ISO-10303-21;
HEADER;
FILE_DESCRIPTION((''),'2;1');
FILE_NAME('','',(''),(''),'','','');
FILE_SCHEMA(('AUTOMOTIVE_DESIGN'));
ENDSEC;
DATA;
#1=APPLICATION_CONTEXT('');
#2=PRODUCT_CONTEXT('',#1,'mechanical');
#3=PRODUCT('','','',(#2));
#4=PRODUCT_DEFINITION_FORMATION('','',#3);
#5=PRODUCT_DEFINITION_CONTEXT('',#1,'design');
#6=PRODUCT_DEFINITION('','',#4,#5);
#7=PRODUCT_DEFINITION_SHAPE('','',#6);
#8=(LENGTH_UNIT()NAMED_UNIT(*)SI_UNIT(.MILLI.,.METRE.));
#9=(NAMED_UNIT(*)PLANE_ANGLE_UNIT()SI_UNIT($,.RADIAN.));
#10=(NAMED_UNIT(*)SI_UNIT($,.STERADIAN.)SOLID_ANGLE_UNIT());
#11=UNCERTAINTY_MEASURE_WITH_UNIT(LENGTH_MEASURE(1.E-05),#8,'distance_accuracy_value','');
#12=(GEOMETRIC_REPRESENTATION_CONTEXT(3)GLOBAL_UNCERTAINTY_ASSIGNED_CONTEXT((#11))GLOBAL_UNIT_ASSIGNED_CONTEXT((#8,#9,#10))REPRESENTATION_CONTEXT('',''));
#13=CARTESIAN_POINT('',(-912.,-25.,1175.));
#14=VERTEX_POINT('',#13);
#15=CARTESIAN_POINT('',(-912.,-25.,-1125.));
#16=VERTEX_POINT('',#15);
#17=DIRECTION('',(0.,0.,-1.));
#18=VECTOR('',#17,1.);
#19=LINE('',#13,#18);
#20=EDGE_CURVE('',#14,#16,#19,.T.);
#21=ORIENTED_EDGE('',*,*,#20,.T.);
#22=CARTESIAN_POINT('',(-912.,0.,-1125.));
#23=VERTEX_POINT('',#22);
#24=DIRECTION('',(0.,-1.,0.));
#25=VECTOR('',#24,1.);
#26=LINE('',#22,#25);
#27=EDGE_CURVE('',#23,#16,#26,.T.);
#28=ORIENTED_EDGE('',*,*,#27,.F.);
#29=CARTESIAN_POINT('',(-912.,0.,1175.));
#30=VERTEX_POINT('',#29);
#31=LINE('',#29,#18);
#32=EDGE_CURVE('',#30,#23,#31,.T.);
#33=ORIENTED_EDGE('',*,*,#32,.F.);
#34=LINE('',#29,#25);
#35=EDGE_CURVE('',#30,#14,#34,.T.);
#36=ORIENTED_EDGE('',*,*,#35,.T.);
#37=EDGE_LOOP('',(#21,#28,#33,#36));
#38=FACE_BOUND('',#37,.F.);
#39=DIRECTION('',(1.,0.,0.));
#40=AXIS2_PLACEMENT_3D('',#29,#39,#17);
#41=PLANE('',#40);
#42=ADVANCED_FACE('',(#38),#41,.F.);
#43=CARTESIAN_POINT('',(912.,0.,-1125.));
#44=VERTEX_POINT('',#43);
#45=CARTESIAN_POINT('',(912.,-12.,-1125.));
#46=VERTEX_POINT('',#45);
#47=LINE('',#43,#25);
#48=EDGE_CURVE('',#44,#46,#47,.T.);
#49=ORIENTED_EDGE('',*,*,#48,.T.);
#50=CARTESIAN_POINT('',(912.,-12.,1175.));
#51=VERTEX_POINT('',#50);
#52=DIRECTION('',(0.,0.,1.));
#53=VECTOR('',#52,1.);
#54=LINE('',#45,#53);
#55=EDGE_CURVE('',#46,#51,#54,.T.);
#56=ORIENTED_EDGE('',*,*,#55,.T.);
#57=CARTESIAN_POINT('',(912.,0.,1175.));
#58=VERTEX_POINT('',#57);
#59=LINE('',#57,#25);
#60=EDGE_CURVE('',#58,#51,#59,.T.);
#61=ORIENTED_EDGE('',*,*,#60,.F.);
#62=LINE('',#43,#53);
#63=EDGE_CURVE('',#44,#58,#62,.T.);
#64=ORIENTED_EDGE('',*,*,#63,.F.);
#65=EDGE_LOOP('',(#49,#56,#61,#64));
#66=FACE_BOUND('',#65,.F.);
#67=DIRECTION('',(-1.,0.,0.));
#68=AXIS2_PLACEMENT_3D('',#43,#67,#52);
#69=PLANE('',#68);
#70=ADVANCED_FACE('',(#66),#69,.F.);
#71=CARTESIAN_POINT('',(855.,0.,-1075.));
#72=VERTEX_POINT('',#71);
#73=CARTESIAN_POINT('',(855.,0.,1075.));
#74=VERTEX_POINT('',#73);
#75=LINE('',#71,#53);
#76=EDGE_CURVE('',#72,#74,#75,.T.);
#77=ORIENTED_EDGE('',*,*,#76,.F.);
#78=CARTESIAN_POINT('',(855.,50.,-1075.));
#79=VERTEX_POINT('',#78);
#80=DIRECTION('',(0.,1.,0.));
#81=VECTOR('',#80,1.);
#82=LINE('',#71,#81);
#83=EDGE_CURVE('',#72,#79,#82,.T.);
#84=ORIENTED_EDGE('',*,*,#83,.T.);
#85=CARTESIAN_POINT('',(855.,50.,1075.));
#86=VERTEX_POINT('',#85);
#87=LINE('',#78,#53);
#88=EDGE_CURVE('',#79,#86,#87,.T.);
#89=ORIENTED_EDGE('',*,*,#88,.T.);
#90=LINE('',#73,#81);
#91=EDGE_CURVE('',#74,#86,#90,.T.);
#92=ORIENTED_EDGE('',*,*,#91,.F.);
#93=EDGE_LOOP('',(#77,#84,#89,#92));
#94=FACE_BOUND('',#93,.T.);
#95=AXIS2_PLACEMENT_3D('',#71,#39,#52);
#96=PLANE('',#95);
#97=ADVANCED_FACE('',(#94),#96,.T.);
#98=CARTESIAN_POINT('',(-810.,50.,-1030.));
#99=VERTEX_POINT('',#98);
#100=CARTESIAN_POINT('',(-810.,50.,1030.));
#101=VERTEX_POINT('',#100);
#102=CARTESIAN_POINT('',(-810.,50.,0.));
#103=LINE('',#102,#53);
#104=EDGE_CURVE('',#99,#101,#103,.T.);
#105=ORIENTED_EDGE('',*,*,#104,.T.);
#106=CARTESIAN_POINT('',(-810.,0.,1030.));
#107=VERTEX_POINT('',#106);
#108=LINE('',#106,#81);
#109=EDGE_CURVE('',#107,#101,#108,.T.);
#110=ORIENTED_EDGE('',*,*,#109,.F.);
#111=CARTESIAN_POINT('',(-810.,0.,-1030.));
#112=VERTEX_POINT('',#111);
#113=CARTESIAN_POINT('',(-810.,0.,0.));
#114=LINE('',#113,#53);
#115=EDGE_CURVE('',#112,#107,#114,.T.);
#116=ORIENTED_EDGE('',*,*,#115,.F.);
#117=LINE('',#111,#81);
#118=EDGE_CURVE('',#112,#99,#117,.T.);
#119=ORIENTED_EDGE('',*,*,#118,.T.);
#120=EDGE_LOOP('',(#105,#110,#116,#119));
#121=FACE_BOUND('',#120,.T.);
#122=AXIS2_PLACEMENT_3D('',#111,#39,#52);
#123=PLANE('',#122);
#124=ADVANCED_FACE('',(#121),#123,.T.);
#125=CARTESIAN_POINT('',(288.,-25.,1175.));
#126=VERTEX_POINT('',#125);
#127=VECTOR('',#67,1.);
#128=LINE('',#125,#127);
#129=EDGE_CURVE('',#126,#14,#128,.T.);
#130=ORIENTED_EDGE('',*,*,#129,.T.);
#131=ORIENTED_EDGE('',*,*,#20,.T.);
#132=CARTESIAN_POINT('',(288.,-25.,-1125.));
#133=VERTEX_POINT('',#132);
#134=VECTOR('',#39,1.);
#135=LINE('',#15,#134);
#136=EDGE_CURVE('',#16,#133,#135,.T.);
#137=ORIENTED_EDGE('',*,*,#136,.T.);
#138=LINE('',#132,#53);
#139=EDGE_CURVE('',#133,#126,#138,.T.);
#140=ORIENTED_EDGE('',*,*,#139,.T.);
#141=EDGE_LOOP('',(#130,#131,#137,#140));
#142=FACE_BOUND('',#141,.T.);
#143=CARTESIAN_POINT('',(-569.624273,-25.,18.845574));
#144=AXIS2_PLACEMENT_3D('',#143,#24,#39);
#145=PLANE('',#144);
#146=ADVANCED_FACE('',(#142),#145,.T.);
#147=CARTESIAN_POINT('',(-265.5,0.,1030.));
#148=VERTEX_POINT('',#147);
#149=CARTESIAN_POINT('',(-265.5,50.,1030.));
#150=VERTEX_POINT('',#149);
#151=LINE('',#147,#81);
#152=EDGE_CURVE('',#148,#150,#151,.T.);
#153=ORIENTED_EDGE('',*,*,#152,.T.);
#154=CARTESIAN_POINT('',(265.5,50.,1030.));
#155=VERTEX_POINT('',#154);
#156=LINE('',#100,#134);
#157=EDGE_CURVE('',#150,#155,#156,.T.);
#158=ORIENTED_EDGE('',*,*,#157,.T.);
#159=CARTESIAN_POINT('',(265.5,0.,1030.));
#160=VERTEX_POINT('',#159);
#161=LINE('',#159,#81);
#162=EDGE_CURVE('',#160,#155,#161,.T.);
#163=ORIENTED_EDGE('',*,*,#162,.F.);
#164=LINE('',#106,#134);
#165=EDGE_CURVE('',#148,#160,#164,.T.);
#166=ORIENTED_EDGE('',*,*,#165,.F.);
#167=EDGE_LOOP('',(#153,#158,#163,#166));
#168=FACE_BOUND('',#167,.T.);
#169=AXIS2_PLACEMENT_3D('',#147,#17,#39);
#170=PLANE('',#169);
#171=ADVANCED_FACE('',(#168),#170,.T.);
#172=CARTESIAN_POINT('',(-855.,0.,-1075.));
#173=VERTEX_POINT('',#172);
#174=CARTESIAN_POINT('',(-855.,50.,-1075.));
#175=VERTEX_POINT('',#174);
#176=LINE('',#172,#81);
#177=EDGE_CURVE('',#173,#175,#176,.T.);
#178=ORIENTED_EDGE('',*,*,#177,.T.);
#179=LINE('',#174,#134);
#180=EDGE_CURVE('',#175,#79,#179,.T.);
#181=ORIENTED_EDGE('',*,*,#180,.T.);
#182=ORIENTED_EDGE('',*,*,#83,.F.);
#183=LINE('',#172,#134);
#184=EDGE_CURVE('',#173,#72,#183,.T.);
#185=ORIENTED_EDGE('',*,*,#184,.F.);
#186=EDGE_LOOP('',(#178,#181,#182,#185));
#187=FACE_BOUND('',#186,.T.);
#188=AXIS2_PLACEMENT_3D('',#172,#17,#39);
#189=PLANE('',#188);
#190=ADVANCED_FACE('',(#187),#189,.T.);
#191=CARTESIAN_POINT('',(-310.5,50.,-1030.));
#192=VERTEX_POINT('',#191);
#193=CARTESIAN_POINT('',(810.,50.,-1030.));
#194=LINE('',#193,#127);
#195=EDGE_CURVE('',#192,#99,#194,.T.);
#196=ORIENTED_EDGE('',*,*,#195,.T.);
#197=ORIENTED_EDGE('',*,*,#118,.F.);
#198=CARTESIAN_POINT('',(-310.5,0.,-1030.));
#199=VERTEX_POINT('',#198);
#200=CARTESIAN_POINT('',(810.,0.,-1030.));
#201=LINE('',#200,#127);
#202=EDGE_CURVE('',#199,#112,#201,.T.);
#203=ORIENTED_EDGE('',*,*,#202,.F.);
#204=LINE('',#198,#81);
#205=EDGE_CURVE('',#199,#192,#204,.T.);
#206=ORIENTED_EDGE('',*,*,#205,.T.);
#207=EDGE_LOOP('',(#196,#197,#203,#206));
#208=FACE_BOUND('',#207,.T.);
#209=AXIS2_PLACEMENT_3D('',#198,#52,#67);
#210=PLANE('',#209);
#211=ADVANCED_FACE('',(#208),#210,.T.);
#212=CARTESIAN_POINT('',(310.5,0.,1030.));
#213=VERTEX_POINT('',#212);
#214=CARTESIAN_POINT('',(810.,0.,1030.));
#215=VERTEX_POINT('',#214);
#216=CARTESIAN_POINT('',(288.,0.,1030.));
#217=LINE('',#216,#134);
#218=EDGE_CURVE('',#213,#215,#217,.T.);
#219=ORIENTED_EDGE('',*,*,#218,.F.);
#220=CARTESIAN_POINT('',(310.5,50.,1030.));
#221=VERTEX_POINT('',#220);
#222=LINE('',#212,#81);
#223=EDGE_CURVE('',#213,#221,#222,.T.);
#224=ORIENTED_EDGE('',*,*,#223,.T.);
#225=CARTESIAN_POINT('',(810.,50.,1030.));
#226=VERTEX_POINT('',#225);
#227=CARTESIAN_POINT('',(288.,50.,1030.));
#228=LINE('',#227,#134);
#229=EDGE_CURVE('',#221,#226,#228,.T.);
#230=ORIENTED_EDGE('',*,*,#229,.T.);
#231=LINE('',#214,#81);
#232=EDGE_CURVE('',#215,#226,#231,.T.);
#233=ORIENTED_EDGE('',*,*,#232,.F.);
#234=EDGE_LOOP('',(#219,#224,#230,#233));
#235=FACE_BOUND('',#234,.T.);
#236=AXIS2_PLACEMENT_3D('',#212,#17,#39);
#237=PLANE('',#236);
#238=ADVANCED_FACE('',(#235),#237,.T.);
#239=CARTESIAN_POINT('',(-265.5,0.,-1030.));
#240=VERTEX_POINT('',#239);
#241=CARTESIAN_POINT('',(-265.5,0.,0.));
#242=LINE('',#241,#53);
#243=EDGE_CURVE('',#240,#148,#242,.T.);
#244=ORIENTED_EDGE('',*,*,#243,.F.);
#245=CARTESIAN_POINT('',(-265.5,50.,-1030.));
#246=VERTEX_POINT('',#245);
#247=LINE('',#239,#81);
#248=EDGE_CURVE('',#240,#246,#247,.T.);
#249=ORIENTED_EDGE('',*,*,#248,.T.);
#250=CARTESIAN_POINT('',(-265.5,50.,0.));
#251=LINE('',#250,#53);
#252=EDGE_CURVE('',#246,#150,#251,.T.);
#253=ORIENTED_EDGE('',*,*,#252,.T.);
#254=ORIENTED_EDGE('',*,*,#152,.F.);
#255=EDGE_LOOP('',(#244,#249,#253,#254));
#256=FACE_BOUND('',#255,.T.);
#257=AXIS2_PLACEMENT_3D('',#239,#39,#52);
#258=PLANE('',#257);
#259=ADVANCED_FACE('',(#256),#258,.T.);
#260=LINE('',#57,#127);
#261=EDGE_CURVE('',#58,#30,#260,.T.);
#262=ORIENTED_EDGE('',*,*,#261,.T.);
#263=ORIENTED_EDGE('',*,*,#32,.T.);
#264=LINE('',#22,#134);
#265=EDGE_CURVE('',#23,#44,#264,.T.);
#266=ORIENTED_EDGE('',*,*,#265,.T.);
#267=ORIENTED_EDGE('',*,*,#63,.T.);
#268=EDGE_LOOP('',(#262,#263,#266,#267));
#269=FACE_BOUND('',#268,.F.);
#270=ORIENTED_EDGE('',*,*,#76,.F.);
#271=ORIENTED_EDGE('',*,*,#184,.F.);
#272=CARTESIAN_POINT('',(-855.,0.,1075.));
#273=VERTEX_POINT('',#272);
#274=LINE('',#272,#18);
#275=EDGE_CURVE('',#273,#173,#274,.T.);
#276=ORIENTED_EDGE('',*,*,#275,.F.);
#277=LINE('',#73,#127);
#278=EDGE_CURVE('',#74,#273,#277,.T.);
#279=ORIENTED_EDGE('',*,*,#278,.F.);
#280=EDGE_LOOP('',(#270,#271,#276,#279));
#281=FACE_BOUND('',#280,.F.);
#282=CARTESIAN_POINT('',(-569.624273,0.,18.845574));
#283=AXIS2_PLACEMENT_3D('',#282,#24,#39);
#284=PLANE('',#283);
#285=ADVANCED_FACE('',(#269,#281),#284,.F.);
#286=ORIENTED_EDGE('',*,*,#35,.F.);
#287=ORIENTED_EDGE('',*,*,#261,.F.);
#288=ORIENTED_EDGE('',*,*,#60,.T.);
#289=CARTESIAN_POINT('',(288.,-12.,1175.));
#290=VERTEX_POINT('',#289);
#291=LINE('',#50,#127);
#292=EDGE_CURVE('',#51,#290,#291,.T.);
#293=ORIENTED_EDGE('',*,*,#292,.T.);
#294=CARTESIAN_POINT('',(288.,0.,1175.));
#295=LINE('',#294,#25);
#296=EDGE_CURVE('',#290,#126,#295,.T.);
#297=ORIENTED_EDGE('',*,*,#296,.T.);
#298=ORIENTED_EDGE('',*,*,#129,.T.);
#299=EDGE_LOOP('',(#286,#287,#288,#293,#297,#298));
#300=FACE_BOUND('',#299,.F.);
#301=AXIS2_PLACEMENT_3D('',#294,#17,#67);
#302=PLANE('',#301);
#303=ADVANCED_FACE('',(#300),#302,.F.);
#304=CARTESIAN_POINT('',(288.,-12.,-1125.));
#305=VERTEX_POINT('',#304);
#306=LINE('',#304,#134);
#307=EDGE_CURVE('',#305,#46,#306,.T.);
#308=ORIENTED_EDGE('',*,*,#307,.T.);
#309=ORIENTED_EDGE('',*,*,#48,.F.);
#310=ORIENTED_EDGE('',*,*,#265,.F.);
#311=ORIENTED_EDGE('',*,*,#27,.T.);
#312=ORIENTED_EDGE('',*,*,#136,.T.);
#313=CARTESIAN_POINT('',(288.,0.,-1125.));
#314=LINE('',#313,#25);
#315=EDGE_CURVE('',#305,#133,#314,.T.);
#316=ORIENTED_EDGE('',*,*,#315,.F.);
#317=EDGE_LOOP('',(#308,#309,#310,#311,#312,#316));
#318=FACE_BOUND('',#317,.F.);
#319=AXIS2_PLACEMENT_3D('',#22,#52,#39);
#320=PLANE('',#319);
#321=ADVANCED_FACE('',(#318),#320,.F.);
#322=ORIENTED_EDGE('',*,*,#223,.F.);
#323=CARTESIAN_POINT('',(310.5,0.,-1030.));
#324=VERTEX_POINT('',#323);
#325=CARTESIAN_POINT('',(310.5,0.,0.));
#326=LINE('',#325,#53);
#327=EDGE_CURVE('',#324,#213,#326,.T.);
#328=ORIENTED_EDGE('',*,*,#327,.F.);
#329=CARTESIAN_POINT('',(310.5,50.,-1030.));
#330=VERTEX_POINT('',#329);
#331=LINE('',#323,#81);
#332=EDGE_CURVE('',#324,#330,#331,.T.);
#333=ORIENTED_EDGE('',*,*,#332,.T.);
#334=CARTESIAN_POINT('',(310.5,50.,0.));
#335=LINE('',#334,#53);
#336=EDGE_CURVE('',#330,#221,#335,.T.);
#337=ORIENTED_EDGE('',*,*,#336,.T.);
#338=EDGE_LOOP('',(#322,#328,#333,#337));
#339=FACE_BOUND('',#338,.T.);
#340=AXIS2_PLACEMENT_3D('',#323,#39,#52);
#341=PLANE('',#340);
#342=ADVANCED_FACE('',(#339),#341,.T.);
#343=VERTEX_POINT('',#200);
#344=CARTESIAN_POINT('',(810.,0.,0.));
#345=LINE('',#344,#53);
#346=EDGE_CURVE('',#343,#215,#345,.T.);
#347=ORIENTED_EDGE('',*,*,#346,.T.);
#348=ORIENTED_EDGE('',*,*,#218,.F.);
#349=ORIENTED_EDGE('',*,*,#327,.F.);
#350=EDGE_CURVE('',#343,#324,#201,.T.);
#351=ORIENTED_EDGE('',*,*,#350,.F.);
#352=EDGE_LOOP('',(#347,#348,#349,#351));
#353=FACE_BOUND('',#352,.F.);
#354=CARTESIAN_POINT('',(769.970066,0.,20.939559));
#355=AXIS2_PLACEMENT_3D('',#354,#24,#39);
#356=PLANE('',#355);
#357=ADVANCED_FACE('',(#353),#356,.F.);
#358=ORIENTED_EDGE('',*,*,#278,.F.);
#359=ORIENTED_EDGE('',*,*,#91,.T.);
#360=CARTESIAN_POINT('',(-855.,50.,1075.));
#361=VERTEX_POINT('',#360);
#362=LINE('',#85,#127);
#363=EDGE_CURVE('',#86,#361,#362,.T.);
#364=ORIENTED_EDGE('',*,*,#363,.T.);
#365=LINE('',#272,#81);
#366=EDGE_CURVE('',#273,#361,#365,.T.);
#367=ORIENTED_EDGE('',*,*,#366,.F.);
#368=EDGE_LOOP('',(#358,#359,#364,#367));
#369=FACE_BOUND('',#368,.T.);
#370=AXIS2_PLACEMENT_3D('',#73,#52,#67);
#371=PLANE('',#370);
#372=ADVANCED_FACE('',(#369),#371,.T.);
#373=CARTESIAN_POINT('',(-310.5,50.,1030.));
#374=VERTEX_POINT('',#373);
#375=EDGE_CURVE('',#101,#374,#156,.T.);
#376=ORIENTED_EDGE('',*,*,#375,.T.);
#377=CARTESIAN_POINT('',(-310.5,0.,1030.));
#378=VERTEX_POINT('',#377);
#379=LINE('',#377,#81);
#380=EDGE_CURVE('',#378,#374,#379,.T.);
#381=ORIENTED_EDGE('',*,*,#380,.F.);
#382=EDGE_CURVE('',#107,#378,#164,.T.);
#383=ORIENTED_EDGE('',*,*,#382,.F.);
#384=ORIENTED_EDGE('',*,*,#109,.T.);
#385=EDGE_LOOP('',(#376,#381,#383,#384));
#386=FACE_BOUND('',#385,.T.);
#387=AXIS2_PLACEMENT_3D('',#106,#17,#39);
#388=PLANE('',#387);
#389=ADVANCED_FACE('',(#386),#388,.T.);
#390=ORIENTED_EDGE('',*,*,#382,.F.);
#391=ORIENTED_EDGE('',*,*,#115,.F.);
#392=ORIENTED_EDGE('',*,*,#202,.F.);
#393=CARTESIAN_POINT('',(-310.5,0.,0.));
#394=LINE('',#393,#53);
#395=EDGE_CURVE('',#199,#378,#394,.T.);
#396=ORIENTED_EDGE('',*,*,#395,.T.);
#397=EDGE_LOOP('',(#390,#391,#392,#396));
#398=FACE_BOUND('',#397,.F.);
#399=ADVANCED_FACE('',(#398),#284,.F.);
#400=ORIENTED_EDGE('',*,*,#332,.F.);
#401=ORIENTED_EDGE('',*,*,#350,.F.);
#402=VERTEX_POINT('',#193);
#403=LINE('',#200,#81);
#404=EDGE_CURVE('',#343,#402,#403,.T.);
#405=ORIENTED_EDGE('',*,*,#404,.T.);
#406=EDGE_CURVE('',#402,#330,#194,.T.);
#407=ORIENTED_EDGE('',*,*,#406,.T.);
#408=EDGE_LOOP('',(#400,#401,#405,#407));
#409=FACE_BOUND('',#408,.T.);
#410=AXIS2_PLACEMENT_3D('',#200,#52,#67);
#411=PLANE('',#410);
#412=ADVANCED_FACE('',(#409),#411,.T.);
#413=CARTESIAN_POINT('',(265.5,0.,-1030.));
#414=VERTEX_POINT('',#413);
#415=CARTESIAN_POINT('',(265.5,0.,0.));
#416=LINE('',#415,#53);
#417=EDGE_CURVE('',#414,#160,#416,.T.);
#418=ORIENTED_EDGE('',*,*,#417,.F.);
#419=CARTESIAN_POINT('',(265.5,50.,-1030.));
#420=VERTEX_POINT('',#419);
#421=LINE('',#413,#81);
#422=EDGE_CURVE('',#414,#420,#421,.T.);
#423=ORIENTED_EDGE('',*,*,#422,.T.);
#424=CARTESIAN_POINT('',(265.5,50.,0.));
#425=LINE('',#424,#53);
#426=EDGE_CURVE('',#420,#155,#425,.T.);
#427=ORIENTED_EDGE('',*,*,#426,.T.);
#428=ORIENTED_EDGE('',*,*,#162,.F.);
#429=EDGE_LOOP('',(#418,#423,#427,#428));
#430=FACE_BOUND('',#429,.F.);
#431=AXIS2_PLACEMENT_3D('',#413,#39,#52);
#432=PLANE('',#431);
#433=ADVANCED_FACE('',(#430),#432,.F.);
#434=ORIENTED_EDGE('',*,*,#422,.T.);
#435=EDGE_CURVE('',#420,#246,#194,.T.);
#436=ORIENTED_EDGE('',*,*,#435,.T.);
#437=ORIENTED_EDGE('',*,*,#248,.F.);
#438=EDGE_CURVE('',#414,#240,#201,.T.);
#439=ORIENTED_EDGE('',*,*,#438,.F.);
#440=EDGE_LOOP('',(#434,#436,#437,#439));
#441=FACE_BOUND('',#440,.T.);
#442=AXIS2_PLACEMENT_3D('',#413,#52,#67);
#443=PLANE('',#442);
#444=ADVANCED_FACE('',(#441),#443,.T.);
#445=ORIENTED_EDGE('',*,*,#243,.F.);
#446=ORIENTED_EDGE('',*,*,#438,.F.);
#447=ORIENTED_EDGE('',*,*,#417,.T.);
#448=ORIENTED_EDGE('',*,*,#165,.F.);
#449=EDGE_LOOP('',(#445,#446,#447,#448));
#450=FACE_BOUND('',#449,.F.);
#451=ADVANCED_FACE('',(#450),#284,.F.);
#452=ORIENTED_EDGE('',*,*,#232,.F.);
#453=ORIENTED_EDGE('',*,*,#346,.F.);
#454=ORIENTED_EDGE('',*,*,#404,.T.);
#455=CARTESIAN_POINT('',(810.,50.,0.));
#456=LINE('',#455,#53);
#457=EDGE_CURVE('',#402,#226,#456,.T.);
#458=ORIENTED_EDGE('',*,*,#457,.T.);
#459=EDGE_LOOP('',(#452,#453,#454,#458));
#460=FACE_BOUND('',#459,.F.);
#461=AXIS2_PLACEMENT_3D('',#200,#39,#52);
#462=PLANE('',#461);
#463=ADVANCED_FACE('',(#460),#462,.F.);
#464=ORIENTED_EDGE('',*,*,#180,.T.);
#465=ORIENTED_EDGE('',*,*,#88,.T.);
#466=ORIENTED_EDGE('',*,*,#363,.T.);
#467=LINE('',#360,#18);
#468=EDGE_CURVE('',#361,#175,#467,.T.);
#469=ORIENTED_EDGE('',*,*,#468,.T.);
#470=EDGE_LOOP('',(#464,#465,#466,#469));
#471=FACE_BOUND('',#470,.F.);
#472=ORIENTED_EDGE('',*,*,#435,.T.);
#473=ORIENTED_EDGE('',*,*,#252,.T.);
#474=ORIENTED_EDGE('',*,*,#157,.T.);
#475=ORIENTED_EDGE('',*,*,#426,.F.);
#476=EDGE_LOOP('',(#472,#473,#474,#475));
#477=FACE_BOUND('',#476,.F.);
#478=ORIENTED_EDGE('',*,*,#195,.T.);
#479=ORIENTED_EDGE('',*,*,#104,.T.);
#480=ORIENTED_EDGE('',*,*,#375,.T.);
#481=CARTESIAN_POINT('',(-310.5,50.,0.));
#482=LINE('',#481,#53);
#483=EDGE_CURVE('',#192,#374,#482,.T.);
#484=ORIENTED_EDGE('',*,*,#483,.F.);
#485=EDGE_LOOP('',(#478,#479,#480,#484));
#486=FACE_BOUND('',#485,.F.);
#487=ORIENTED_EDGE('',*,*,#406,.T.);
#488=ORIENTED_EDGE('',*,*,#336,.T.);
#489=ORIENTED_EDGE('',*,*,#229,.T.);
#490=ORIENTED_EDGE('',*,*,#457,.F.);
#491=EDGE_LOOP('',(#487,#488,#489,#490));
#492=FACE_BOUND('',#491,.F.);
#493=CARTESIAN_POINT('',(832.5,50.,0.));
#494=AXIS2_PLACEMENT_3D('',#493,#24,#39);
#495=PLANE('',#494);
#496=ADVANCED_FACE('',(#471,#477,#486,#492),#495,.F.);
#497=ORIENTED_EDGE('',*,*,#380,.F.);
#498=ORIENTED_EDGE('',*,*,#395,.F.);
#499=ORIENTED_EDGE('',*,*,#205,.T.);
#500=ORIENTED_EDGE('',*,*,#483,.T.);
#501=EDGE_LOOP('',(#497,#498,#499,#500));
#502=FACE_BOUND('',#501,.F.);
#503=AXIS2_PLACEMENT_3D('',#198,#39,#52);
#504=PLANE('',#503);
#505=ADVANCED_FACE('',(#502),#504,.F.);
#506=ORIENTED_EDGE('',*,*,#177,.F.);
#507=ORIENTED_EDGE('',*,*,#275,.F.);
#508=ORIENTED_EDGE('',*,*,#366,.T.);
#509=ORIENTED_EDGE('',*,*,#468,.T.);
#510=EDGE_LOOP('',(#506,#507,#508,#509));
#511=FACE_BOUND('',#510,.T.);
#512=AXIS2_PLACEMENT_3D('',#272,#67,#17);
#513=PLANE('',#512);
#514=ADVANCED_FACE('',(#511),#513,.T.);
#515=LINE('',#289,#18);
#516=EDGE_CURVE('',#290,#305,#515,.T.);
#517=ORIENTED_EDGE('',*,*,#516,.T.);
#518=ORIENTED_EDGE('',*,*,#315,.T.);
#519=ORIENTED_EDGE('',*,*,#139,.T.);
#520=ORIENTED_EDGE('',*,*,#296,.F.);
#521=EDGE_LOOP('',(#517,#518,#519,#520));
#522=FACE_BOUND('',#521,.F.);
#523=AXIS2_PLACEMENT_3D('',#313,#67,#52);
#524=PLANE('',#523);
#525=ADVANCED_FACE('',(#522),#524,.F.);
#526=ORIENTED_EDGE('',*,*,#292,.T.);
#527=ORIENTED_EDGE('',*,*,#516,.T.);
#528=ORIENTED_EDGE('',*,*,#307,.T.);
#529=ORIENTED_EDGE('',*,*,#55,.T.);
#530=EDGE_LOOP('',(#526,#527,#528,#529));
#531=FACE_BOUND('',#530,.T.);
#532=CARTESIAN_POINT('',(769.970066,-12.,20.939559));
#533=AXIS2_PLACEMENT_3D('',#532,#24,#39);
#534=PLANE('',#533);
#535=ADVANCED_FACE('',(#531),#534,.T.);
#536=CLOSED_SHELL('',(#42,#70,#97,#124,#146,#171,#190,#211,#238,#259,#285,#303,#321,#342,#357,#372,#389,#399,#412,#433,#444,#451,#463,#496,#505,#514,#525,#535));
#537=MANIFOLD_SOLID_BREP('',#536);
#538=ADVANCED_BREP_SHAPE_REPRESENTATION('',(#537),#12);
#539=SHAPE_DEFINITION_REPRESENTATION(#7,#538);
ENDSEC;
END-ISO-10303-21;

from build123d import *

# Parameters (mm, degrees)
F0_W     = 45
F0_H     = 2060
F0_W_2   = 22.5
F1_DEPTH = 50
F0_W_3   = 499.5
F2_DEPTH = 12
F0_W_4   = 531
F3_DEPTH = 25


# Not quite as in the source:
# - a feature names something its author has since deleted; it is built from what else it names


with BuildPart() as f1:
    # F0 (on Front) → F1 (new body)
    with BuildSketch(Plane.XZ):
        with Locations((832.5, 0)):
            Rectangle(F0_W, F0_H)
        Polygon((288, -1075), (855, -1075), (855, -1030), (810, -1030), (310.5, -1030), (288, -1030), align=None)
        Polygon((-855, -1075), (288, -1075), (288, -1030), (265.5, -1030), (-265.5, -1030), (-310.5, -1030), (-810, -1030), (-855, -1030), align=None)
        with Locations((-832.5, 0)):
            Rectangle(F0_W, F0_H)
        with Locations((276.75, 0)):
            Rectangle(F0_W_2, F0_H)
        Polygon((810, 1030), (855, 1030), (855, 1075), (288, 1075), (288, 1030), (310.5, 1030), align=None)
        Polygon((265.5, 1030), (288, 1030), (288, 1075), (-855, 1075), (-855, 1030), (-810, 1030), (-310.5, 1030), (-265.5, 1030), align=None)
        with Locations((-288, 0)):
            Rectangle(F0_W, F0_H)
        with Locations((299.25, 0)):
            Rectangle(F0_W_2, F0_H)
    extrude(amount=-F1_DEPTH)

    # F0 (on Front) → F2 (join)
    with BuildSketch(Plane.XZ):
        Polygon((855, -1030), (855, -1075), (288, -1075), (288, -1125), (912, -1125), (912, 1175), (288, 1175), (288, 1075), (855, 1075), (855, 1030), align=None)
        with Locations((560.25, 0)):
            Rectangle(F0_W_3, F0_H)
        Polygon((288, -1075), (855, -1075), (855, -1030), (810, -1030), (310.5, -1030), (288, -1030), align=None)
        with Locations((832.5, 0)):
            Rectangle(F0_W, F0_H)
        Polygon((810, 1030), (855, 1030), (855, 1075), (288, 1075), (288, 1030), (310.5, 1030), align=None)
        with Locations((299.25, 0)):
            Rectangle(F0_W_2, F0_H)
    extrude(amount=F2_DEPTH)

    # F0 (on Front) → F3 (join)
    with BuildSketch(Plane.XZ):
        Polygon((288, -1125), (288, -1075), (-855, -1075), (-855, -1030), (-855, 1030), (-855, 1075), (288, 1075), (288, 1175), (-912, 1175), (-912, -1125), align=None)
        with Locations((-288, 0)):
            Rectangle(F0_W, F0_H)
        Polygon((265.5, 1030), (288, 1030), (288, 1075), (-855, 1075), (-855, 1030), (-810, 1030), (-310.5, 1030), (-265.5, 1030), align=None)
        with Locations((-832.5, 0)):
            Rectangle(F0_W, F0_H)
        with Locations((-560.25, 0)):
            Rectangle(F0_W_3, F0_H)
        Rectangle(F0_W_4, F0_H)
        Polygon((-855, -1075), (288, -1075), (288, -1030), (265.5, -1030), (-265.5, -1030), (-310.5, -1030), (-810, -1030), (-855, -1030), align=None)
        with Locations((276.75, 0)):
            Rectangle(F0_W_2, F0_H)
    extrude(amount=F3_DEPTH)


solid = f1.part
